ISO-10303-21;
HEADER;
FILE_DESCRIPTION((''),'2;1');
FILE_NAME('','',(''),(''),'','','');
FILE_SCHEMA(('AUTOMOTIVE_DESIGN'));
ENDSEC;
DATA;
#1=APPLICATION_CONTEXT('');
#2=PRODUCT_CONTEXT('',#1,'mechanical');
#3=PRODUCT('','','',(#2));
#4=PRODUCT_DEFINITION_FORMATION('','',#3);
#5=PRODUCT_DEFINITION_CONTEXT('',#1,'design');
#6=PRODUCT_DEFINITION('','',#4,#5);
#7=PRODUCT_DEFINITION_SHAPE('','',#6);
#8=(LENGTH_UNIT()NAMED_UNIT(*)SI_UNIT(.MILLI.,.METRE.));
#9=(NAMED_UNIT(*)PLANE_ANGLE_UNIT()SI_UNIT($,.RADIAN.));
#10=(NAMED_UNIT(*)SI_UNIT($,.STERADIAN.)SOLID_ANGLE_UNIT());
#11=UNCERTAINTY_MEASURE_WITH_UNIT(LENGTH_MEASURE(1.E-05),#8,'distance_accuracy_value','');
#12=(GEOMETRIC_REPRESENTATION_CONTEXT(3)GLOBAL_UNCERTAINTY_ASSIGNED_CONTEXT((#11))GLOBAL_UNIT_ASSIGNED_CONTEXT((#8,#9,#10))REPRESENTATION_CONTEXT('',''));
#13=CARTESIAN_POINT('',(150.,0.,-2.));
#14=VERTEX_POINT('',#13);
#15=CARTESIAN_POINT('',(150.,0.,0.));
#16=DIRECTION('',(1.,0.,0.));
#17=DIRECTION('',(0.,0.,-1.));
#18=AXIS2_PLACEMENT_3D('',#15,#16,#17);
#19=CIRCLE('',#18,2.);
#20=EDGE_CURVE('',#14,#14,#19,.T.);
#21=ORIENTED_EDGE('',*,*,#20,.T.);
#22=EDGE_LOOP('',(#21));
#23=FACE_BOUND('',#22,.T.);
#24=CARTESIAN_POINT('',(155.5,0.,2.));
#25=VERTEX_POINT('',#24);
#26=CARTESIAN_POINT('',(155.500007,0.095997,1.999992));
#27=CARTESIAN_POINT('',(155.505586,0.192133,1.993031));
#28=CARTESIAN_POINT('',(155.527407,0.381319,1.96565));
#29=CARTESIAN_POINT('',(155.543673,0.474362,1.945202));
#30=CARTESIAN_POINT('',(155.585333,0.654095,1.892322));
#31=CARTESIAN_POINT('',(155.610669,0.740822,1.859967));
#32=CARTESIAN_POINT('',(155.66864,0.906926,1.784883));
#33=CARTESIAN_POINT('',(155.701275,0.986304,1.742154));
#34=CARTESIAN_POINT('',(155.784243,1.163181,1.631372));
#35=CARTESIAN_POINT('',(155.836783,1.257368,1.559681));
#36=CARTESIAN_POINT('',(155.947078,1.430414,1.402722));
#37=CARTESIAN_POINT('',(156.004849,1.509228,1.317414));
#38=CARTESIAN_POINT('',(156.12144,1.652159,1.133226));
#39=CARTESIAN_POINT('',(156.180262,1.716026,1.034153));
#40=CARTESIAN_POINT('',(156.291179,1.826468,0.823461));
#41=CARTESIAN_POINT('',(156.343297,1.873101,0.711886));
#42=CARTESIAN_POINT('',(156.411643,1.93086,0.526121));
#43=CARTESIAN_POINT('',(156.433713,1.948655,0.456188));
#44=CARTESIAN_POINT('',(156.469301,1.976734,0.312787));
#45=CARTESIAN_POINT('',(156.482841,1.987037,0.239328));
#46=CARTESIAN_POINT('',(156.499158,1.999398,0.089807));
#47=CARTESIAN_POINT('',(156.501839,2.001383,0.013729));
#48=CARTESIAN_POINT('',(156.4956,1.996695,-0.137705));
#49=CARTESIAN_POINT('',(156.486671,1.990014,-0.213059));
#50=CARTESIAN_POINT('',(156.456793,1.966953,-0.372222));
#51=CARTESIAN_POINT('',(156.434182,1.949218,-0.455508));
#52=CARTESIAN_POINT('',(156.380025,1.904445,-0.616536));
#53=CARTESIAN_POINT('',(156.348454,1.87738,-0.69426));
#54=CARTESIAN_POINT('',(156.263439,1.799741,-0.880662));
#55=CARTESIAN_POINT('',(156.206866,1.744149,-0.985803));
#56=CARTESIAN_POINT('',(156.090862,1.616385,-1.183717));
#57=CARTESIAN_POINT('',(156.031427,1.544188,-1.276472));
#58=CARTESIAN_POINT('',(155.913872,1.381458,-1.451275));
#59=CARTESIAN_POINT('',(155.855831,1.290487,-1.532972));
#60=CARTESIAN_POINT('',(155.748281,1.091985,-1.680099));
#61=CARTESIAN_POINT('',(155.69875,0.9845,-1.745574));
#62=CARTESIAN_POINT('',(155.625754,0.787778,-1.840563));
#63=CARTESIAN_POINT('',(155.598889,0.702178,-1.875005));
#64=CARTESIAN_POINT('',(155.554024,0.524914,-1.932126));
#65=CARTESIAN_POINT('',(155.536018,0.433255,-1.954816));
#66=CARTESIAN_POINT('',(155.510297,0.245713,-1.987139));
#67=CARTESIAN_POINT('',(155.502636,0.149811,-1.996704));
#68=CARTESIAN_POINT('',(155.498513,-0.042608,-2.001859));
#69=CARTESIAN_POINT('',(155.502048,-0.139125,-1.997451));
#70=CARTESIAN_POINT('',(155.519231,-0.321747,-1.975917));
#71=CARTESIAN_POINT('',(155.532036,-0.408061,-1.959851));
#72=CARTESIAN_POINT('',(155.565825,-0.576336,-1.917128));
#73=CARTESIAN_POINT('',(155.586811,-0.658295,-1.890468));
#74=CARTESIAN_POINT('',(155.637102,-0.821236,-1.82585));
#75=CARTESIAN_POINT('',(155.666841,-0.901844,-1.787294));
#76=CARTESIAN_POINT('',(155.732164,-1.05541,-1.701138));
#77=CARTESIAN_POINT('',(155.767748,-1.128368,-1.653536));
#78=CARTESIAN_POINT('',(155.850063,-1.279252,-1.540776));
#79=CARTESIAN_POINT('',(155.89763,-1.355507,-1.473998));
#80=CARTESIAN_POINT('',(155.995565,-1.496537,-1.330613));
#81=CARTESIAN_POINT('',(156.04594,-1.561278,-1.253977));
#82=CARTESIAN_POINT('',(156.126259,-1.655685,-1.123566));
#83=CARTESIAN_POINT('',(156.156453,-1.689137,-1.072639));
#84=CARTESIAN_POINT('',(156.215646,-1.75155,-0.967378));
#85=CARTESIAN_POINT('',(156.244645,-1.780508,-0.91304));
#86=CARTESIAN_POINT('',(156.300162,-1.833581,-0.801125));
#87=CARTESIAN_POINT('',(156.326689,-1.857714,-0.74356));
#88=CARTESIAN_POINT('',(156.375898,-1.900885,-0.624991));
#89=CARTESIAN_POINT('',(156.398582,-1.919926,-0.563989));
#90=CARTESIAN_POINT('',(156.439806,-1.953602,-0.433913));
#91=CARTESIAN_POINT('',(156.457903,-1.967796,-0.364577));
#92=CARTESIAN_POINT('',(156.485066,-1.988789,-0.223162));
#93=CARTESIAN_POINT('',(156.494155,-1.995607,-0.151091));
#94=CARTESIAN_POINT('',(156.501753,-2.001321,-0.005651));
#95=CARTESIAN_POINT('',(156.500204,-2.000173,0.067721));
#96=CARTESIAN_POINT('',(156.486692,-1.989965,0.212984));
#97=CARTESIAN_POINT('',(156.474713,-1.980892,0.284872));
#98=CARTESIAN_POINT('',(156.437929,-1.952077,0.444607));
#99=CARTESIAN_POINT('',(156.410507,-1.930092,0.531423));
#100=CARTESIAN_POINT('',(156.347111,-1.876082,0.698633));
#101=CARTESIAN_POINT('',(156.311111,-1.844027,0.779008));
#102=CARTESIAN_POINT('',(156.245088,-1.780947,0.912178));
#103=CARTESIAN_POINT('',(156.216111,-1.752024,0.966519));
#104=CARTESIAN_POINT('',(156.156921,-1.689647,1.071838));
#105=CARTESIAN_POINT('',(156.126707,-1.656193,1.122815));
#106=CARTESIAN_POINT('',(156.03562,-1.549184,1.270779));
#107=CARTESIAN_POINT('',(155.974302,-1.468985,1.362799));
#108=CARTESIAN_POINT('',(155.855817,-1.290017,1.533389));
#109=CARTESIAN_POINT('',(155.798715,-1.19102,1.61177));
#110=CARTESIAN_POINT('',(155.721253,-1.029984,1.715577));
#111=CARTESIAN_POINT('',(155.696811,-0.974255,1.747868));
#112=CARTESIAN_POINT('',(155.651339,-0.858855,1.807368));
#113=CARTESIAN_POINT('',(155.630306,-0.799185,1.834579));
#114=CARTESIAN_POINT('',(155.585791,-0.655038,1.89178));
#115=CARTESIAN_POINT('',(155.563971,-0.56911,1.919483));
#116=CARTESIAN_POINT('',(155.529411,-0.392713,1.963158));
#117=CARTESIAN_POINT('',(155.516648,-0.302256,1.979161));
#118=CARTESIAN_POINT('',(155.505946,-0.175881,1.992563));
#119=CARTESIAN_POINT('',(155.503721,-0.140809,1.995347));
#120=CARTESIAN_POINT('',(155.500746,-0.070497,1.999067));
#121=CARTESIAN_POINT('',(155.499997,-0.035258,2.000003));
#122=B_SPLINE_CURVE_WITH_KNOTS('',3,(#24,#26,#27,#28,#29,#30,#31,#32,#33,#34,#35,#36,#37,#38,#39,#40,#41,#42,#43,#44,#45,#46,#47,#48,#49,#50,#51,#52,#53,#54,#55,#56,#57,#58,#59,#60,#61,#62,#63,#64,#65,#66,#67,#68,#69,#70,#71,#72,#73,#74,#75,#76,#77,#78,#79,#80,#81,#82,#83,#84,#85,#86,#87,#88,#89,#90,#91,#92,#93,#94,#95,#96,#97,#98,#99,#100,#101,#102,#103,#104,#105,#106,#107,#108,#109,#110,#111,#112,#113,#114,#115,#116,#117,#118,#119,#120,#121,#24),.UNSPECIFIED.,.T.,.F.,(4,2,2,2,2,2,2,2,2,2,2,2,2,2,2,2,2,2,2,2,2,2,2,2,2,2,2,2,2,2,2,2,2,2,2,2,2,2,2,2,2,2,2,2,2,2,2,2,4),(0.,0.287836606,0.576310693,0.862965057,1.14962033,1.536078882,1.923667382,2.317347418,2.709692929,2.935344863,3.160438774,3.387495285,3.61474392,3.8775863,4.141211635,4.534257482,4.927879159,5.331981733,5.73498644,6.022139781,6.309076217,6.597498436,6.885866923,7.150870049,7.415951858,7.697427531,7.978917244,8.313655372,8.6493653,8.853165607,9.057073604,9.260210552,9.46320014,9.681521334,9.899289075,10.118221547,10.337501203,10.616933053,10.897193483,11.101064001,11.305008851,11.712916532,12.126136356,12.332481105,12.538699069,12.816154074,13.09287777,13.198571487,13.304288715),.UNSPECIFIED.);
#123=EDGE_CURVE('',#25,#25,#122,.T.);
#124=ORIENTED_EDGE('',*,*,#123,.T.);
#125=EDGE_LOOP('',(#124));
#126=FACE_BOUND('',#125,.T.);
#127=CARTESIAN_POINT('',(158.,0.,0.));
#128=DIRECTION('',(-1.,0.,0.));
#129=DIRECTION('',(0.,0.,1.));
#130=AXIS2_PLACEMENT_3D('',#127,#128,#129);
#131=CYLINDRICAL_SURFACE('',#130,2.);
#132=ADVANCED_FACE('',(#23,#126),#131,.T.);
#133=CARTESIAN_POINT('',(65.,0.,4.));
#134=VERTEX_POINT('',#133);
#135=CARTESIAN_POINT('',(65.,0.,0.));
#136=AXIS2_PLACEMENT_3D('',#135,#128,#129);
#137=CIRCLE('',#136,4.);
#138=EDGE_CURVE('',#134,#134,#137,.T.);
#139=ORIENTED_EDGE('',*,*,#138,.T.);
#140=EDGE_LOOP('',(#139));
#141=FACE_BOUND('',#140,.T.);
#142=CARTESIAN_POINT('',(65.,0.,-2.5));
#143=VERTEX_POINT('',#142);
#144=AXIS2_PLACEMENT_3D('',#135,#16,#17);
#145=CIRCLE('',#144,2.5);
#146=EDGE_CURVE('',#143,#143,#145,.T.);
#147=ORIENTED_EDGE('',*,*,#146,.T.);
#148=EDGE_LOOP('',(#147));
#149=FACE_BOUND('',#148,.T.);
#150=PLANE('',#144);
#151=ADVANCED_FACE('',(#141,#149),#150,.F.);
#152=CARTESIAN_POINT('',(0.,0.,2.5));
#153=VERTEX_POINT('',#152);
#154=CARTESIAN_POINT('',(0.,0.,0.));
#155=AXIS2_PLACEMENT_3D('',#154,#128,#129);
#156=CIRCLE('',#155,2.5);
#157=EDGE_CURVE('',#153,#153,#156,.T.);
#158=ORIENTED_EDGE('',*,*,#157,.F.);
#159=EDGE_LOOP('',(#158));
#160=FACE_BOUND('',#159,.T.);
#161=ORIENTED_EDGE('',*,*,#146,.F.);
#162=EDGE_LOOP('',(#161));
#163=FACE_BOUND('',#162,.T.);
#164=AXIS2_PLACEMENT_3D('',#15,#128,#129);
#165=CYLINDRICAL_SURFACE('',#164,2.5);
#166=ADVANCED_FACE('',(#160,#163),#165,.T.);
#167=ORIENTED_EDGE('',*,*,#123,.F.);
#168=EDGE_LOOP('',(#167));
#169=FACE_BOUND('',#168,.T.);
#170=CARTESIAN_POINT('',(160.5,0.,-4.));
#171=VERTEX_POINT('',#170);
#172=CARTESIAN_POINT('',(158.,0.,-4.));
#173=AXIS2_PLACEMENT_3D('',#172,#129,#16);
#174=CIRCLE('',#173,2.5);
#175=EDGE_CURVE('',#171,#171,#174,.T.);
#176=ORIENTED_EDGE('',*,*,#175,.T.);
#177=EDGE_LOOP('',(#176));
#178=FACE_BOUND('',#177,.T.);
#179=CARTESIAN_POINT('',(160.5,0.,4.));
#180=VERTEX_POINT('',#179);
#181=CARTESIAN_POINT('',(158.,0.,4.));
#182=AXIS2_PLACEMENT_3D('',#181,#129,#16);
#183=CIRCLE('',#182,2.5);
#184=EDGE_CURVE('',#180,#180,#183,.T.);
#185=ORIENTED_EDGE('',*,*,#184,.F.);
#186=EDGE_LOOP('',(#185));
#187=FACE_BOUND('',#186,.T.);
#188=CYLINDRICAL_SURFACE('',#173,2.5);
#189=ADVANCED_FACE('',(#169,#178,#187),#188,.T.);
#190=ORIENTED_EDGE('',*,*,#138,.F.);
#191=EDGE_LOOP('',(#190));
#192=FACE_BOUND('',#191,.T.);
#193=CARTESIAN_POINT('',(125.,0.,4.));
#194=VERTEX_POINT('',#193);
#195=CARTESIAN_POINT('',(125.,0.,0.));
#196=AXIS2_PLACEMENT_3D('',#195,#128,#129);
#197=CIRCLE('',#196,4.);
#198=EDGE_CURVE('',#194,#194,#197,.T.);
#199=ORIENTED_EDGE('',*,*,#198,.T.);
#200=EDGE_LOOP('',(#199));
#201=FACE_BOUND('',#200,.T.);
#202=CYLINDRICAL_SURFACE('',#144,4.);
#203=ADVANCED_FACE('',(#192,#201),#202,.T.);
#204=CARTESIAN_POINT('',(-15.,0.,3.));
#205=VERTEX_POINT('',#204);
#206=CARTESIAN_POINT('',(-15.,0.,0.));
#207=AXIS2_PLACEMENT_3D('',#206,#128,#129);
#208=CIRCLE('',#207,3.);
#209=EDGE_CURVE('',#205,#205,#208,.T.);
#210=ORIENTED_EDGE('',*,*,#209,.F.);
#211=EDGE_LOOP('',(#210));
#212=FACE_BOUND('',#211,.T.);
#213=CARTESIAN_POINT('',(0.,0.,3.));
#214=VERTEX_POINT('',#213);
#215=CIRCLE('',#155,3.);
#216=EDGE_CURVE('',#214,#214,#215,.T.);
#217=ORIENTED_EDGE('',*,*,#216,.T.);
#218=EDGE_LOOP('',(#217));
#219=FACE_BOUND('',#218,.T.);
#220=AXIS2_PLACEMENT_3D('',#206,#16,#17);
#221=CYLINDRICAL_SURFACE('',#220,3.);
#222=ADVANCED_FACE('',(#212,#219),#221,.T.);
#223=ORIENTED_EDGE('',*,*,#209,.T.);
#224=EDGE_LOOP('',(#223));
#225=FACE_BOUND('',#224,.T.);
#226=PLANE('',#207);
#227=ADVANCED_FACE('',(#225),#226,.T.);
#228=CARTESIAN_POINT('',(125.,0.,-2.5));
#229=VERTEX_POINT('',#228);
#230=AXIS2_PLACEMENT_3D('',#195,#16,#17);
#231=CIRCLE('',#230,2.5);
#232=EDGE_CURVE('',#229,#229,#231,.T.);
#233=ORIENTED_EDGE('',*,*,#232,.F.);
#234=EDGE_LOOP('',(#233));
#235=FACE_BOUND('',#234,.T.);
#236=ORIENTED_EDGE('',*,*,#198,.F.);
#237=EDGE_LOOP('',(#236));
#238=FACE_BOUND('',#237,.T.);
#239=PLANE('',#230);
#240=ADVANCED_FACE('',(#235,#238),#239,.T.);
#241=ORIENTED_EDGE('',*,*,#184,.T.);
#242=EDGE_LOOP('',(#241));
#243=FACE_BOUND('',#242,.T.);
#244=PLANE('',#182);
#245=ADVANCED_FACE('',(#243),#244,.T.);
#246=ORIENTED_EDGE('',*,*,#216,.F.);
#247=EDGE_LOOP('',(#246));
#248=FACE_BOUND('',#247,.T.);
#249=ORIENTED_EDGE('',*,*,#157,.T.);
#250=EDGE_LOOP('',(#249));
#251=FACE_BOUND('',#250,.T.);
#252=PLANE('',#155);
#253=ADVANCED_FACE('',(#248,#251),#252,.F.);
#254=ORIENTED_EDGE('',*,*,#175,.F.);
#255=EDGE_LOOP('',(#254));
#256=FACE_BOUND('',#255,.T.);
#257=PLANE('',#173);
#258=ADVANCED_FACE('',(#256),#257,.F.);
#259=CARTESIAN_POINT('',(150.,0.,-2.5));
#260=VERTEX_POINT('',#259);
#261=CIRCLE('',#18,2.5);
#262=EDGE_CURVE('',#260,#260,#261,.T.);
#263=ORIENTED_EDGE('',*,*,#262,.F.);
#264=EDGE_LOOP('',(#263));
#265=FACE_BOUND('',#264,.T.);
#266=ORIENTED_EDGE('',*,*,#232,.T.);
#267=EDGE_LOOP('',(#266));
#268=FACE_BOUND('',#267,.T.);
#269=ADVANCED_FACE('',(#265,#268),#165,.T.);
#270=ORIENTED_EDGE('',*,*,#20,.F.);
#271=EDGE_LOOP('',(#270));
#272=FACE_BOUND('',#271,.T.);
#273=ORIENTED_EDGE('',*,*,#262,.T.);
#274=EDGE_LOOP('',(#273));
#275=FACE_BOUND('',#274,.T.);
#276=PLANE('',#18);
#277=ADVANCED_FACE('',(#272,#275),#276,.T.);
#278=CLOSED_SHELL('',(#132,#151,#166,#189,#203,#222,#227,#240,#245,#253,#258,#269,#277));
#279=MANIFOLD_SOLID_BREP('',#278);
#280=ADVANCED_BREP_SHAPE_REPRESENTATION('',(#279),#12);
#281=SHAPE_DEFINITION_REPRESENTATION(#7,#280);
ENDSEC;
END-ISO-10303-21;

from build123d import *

# Parameters (mm, degrees)
SKETCH1_R                = 2.5
BOSS_EXTRUDE1_DEPTH      = 150
SKETCH3_R                = 3
BOSS_EXTRUDE2_DEPTH      = 15
SKETCH4_R                = 2
BOSS_EXTRUDE3_DEPTH      = 8
BOSS_EXTRUDE4_DEPTH      = 4
BOSS_EXTRUDE4_DEPTH_BACK = 4
SKETCH5_R                = 2.5
F_3DSKETCH1_R            = 4
BOSS_EXTRUDE5_DEPTH      = 60


with BuildPart() as part:
    # Sketch1 → Boss-Extrude1 (new body)
    with BuildSketch(Plane(origin=(0, 0, 0), x_dir=(0, 0, -1), z_dir=(1, 0, 0))):
        Circle(SKETCH1_R)
    extrude(amount=BOSS_EXTRUDE1_DEPTH)

    # Sketch3 → Boss-Extrude2 (add)
    with BuildSketch(Plane.ZY):
        Circle(SKETCH3_R)
    extrude(amount=BOSS_EXTRUDE2_DEPTH)

    # Sketch4 → Boss-Extrude3 (add)
    with BuildSketch(Plane(origin=(150, 0, 0), x_dir=(0, 0, -1), z_dir=(1, 0, 0))):
        Circle(SKETCH4_R)
    extrude(amount=BOSS_EXTRUDE3_DEPTH)

    # Sketch5 → Boss-Extrude4 (add, two sides: drawn at the far end of the back side and taken through both)
    with BuildSketch(Plane.XY.offset(-BOSS_EXTRUDE4_DEPTH_BACK)):
        with Locations((158, 0)):
            Circle(SKETCH5_R)
    extrude(amount=BOSS_EXTRUDE4_DEPTH + BOSS_EXTRUDE4_DEPTH_BACK)

    # 3DSketch1 → Boss-Extrude5 (add)
    with BuildSketch(Plane(origin=(65, 0, 0), x_dir=(0, 0, 1), z_dir=(1, 0, 0))):
        Circle(F_3DSKETCH1_R)
    extrude(amount=BOSS_EXTRUDE5_DEPTH)


solid = part.part
